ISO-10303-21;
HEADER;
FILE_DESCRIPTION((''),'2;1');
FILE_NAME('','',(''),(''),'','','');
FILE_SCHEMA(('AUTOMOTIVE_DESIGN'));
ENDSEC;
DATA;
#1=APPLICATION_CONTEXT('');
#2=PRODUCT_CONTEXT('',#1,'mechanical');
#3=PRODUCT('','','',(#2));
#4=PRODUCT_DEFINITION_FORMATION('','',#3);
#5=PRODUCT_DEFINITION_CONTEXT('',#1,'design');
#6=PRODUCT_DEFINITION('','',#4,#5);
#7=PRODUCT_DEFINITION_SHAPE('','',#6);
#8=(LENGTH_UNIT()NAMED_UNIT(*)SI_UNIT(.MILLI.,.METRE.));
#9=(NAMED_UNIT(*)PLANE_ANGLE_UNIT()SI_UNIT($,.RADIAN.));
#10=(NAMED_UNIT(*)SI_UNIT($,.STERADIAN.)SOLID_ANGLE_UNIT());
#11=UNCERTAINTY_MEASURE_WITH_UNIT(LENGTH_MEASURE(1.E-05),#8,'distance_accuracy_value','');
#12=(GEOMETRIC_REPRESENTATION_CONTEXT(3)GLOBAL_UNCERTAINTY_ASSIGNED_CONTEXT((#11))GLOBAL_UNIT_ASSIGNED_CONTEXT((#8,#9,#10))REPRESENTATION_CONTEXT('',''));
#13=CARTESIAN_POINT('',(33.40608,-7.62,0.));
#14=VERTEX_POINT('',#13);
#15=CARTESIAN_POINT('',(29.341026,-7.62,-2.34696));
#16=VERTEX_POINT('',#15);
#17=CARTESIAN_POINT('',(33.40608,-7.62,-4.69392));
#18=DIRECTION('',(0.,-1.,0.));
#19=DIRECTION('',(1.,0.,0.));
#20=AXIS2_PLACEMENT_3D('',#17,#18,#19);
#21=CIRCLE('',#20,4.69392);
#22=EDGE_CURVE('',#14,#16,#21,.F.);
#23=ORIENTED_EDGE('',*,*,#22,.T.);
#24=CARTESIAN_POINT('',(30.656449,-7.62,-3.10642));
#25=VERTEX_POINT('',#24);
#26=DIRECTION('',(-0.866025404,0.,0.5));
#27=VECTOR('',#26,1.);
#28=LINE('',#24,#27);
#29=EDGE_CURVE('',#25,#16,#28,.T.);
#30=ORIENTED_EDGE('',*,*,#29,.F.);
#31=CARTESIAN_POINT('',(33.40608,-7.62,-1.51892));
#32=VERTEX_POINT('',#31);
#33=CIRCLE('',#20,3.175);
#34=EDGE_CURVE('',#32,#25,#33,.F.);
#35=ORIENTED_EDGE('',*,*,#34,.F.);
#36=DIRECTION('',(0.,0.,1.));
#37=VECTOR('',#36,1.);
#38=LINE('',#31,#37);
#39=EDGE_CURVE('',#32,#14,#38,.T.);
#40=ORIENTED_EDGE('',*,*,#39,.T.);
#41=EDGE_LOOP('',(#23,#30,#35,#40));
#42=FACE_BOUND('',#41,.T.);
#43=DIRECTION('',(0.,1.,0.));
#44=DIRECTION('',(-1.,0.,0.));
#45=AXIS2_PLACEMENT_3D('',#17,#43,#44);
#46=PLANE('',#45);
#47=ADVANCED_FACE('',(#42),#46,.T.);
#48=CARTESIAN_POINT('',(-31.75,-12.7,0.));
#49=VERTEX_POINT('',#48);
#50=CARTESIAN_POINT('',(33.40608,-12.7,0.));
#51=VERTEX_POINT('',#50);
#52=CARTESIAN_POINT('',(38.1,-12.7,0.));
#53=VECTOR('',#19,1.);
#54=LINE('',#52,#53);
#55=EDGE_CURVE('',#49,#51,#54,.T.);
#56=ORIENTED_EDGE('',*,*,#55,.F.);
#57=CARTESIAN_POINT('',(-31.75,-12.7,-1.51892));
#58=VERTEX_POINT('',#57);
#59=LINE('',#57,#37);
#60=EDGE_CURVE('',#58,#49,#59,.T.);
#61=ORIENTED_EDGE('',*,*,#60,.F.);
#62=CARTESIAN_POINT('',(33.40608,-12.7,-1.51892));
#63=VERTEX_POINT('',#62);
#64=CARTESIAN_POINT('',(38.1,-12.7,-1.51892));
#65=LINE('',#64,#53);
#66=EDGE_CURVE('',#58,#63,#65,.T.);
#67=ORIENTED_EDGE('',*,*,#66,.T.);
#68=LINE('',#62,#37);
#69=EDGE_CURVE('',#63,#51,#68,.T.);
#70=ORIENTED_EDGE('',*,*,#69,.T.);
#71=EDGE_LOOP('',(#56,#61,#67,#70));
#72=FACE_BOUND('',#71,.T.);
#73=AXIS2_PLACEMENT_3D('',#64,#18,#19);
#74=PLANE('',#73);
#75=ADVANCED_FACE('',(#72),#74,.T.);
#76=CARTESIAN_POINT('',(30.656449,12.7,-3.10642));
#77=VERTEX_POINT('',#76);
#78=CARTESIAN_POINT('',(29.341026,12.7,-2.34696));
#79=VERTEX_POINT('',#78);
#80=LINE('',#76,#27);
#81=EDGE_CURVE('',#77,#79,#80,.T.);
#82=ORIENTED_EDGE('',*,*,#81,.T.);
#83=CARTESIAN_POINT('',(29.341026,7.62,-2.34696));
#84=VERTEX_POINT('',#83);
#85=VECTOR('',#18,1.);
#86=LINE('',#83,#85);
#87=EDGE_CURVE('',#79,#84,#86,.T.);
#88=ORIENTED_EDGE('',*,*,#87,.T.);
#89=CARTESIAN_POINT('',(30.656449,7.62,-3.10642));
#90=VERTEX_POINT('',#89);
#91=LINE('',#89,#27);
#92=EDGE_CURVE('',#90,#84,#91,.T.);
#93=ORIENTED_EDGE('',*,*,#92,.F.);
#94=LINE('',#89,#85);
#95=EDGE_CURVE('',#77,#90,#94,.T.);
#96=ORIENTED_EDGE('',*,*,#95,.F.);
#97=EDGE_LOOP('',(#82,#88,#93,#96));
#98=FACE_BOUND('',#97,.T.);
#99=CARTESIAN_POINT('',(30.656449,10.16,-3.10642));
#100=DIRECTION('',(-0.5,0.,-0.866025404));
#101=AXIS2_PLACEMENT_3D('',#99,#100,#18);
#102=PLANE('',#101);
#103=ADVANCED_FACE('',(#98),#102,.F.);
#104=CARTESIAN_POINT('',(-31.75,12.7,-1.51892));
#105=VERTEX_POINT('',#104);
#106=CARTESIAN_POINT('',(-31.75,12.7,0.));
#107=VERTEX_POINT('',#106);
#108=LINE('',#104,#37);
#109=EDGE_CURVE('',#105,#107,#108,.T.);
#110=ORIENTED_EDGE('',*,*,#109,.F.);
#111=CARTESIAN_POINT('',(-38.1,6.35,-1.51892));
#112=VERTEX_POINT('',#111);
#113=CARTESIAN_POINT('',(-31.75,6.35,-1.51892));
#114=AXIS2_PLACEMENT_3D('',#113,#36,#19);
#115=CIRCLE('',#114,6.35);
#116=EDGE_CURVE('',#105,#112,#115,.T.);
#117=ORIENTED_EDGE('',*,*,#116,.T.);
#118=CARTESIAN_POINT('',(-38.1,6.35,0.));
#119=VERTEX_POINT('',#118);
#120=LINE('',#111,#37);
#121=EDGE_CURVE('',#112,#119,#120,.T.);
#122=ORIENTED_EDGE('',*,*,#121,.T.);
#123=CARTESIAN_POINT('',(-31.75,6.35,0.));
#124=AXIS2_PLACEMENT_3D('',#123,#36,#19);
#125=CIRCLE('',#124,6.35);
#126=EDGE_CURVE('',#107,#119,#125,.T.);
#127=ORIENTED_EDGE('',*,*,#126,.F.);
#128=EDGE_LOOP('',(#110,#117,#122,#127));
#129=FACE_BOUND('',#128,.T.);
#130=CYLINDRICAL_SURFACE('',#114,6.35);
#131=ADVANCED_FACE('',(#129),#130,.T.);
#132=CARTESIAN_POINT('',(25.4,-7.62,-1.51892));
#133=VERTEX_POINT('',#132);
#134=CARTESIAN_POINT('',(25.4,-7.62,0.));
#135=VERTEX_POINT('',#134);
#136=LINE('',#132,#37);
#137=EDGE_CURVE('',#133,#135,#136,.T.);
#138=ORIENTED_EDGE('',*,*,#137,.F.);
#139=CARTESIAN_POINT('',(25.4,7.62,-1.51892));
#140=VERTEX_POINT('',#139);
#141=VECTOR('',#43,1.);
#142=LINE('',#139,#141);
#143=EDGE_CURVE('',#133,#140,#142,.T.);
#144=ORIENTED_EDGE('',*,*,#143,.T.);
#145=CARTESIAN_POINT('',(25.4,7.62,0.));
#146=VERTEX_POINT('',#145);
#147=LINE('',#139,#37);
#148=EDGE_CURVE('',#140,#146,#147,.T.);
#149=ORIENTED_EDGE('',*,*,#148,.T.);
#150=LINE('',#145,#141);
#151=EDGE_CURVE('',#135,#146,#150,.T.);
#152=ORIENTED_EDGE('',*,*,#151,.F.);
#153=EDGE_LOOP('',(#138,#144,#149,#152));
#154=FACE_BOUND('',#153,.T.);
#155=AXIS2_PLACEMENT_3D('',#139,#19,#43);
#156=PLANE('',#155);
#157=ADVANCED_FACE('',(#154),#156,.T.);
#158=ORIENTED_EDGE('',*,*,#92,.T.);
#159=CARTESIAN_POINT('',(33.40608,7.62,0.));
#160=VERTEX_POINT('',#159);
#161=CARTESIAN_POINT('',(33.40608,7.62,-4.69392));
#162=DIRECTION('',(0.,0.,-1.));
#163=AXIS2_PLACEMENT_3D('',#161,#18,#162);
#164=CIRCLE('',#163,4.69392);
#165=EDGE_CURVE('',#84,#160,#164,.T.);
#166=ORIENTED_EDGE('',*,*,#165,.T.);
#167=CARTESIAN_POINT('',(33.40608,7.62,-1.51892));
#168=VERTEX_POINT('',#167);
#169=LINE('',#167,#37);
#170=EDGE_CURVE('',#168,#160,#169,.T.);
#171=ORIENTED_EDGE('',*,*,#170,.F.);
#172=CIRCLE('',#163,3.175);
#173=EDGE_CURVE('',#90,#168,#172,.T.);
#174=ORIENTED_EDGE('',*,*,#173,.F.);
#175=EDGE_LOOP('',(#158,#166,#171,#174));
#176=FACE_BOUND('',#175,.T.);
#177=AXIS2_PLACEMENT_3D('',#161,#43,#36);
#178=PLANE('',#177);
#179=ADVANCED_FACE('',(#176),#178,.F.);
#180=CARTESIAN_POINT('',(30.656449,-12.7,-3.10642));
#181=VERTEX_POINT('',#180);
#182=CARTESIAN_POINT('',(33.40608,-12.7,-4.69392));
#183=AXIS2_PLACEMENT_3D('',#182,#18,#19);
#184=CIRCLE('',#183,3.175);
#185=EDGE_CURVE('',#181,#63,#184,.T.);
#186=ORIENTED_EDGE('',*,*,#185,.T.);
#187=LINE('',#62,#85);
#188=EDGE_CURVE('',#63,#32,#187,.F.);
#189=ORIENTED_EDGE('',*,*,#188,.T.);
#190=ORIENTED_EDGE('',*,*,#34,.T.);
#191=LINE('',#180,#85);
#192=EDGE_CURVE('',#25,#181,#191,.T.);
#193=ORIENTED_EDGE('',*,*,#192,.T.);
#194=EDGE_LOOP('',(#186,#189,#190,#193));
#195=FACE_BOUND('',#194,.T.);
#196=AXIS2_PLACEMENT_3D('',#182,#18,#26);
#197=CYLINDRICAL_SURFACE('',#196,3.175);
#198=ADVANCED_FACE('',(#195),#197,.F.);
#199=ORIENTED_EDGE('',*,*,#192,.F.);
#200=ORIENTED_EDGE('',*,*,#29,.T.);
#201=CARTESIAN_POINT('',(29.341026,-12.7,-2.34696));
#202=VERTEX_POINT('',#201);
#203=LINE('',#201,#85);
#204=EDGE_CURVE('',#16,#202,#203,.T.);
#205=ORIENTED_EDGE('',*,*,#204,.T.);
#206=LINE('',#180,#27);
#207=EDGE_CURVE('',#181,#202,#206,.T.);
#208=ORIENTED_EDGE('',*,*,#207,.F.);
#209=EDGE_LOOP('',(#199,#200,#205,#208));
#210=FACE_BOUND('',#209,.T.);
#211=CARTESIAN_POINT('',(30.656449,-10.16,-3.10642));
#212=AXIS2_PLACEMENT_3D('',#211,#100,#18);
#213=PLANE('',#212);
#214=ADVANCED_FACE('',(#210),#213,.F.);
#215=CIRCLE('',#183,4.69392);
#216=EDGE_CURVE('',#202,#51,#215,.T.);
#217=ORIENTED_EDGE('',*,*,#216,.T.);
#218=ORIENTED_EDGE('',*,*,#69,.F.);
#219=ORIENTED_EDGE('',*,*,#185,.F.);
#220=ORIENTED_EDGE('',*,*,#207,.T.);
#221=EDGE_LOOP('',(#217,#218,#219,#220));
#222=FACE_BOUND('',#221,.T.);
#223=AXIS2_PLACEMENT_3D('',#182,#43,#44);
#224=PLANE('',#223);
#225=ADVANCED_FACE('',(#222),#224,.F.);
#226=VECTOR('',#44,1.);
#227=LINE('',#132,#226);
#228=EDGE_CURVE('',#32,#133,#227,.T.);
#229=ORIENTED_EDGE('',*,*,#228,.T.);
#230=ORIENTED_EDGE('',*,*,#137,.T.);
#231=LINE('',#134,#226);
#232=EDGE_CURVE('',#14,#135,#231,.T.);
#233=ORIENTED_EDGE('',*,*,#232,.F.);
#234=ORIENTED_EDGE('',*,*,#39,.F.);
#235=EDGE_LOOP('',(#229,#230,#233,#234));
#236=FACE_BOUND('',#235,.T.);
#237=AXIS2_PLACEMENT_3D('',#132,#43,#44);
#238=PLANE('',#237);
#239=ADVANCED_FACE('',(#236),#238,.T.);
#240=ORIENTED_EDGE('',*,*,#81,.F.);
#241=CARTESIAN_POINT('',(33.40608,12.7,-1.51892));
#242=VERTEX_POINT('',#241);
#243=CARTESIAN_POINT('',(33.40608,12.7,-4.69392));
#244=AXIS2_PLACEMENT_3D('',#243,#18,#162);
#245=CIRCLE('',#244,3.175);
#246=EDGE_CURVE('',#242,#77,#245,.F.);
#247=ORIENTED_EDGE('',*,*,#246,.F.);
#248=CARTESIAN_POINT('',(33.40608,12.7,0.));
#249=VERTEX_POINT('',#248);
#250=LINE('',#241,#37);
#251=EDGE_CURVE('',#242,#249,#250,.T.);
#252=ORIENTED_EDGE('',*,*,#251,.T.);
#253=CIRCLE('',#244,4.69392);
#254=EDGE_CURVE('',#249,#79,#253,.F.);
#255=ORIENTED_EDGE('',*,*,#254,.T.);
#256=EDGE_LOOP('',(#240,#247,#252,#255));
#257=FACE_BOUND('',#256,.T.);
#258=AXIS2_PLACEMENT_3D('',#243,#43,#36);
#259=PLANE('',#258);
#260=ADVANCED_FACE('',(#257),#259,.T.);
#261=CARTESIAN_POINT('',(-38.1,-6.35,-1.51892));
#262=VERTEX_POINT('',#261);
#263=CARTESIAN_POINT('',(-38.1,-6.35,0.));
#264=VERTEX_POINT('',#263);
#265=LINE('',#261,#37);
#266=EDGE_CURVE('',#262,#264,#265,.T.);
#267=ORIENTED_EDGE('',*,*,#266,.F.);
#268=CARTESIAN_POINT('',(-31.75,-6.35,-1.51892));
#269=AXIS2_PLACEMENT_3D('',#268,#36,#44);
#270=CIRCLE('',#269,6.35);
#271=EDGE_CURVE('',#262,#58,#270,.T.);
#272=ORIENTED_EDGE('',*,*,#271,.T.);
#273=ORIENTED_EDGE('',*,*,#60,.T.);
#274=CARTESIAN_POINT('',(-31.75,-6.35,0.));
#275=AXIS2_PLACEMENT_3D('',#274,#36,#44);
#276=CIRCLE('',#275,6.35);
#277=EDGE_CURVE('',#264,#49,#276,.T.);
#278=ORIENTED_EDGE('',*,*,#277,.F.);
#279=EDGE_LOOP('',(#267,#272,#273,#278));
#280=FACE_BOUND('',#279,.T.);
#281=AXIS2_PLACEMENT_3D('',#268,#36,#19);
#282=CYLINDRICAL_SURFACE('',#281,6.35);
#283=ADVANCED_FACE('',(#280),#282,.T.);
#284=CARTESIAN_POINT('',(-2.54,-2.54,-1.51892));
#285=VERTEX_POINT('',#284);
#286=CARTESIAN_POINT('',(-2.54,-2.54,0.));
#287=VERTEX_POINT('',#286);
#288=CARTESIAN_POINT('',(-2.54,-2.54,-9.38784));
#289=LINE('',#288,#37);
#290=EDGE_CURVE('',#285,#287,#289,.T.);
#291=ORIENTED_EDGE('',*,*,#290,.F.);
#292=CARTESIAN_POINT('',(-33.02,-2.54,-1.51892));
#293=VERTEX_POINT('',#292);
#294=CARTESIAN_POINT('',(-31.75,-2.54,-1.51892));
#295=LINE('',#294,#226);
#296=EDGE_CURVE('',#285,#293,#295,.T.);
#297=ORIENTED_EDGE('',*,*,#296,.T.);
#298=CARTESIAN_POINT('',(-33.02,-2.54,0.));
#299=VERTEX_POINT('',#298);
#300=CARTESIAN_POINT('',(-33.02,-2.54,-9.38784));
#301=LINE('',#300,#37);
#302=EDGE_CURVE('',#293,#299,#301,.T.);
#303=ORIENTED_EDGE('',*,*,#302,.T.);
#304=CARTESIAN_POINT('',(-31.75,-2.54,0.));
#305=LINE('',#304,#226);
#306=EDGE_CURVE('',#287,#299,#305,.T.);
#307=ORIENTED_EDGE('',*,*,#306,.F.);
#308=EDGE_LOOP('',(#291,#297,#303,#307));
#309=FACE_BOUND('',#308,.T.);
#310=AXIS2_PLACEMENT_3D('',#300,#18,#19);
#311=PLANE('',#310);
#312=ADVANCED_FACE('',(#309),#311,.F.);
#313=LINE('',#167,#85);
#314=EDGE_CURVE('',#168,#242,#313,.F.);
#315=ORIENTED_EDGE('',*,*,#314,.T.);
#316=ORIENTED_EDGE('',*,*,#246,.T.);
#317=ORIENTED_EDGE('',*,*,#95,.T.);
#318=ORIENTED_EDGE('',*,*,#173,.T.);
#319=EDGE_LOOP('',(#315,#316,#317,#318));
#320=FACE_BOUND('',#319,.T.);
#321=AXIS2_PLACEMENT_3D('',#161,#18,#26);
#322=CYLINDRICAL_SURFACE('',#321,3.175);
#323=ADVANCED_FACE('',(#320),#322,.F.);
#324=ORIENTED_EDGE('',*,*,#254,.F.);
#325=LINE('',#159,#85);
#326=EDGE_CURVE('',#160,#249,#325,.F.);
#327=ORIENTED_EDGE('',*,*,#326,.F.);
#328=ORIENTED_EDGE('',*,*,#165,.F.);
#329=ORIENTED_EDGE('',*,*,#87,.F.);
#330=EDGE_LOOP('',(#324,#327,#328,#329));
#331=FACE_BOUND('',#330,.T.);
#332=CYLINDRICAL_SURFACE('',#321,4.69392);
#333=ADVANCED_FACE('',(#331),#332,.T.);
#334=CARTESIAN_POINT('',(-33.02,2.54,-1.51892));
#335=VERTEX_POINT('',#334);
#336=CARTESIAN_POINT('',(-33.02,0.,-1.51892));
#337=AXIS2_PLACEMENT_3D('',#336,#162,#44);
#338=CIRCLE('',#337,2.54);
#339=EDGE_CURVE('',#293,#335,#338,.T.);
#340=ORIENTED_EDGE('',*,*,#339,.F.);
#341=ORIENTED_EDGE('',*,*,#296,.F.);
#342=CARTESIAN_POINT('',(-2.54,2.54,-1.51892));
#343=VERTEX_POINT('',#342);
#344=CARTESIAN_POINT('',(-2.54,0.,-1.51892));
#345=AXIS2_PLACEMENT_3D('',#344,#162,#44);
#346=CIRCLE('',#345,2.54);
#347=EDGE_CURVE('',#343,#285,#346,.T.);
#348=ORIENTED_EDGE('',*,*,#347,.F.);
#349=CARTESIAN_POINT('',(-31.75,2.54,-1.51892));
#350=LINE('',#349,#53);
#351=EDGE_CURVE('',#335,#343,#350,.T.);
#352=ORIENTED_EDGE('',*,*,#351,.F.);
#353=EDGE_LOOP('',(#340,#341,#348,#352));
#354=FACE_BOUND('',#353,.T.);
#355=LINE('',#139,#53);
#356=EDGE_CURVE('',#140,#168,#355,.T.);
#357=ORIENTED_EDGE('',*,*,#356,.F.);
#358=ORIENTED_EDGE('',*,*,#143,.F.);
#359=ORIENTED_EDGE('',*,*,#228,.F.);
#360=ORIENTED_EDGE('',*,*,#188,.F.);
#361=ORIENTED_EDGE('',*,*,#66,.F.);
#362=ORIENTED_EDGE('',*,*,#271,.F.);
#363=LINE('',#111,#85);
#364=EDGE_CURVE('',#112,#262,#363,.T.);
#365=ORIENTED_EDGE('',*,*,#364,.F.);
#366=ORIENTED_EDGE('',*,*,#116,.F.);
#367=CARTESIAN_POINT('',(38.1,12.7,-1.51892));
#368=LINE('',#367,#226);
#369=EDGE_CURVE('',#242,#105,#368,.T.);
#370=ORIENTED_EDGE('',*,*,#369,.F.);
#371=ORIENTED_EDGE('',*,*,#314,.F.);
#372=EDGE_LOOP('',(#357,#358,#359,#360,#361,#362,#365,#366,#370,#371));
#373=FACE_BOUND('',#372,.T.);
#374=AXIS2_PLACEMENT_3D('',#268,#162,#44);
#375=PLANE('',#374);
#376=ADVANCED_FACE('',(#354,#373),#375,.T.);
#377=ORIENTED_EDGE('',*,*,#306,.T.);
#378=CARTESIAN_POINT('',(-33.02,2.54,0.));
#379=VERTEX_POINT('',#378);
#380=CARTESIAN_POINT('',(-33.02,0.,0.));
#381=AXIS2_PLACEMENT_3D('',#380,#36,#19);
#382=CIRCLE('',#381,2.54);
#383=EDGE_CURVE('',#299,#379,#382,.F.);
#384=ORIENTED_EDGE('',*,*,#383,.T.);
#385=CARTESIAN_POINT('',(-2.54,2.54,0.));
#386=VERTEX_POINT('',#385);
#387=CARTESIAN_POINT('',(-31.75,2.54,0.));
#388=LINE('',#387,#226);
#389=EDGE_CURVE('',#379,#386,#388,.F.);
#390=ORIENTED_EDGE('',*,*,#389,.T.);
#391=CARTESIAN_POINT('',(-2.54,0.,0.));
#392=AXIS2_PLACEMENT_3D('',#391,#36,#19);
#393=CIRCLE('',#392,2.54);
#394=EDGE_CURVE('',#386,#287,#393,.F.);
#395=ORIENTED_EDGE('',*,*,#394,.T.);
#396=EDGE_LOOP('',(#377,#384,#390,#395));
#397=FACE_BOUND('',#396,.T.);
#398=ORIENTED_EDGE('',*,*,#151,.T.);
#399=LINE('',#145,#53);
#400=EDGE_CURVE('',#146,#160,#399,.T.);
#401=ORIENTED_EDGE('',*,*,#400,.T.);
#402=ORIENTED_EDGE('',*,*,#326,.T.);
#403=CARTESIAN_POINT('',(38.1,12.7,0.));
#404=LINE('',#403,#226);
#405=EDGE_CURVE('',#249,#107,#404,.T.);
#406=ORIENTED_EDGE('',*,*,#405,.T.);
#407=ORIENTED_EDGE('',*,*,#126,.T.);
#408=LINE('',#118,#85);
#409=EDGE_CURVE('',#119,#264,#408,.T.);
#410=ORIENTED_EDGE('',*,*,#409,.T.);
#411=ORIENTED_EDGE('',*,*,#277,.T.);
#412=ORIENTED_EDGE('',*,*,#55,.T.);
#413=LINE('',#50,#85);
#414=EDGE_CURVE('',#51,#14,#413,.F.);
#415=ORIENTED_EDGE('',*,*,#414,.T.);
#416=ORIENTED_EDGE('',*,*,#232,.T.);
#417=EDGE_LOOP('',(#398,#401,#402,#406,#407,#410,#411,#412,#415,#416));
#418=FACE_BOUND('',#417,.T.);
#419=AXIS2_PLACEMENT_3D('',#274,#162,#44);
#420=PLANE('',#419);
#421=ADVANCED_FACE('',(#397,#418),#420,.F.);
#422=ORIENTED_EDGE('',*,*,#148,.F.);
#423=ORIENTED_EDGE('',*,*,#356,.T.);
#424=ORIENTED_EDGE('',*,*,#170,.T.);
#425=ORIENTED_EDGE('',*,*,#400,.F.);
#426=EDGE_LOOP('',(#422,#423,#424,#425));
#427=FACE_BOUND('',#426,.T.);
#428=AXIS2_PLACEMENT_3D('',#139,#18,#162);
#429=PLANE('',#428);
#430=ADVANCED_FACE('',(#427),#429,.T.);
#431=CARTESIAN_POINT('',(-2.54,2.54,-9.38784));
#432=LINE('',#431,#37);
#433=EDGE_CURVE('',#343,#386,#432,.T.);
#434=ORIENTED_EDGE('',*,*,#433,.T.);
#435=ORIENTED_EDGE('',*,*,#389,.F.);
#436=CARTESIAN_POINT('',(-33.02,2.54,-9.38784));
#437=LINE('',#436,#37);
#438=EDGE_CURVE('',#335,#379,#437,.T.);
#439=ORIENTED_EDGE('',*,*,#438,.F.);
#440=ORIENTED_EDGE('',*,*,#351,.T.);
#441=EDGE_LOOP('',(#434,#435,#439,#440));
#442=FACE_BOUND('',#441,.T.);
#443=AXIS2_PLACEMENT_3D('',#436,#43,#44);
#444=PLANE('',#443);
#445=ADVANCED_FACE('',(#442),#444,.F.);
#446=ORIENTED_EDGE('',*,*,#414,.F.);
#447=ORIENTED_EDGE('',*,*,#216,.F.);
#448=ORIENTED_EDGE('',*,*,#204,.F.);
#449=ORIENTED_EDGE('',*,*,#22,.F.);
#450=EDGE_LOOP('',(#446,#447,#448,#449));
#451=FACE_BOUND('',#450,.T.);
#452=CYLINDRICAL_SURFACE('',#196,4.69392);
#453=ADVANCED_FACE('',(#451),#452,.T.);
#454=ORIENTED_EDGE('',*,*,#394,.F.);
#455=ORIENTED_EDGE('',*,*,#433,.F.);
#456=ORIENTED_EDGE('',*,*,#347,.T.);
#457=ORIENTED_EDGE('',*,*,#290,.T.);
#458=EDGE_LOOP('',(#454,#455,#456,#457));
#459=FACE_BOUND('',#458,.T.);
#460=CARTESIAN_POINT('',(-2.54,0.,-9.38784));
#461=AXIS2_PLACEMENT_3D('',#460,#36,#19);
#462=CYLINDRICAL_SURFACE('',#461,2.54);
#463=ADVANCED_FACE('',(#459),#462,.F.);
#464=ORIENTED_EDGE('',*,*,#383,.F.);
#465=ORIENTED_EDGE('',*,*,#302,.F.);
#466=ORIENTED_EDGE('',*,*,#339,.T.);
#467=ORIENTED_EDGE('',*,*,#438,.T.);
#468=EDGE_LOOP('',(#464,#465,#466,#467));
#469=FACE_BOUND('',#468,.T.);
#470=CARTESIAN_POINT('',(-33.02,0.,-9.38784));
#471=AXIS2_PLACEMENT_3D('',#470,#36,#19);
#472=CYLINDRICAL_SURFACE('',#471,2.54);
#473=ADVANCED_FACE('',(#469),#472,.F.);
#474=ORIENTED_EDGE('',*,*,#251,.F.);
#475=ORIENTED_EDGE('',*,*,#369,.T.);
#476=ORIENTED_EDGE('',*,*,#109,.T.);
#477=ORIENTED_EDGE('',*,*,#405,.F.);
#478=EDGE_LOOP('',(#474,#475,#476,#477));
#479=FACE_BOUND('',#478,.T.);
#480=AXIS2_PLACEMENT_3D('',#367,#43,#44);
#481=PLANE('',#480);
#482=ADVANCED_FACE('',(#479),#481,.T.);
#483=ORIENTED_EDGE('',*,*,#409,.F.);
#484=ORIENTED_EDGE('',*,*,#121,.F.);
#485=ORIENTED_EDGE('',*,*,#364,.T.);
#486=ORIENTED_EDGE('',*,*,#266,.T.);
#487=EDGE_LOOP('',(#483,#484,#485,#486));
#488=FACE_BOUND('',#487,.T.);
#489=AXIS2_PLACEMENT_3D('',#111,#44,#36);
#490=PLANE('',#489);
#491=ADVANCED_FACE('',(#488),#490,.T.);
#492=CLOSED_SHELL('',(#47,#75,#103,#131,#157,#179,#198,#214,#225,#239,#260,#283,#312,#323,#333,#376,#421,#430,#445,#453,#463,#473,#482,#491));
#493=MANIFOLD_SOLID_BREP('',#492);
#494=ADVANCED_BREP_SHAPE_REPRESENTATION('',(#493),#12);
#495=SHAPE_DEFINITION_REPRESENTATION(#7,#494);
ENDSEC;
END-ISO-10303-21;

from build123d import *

# Parameters (mm, degrees)
BASE_FLANGE1_DEPTH      = 1.51892
HEM1_START              = -12.7
HEM1_DEPTH              = 25.4
HEM1_2_DEPTH            = 5.08
HEM1_START_2            = 7.62
HEM1_3_DEPTH            = 5.08
CUT_EXTRUDE1_DEPTH      = 42.243563617
CUT_EXTRUDE1_DEPTH_BACK = 42.243563617


# Read off the part's stored shape, not the designer's step: Hem1
# Sheet-metal steps are written as plain solids
with BuildPart() as part:
    # Sketch1 → Base-Flange1 (new body)
    with BuildSketch(Plane.XY):
        with BuildLine():
            Line((38.1, -7.62), (38.1, -12.7))
            Line((38.1, -12.7), (-31.75, -12.7))
            ThreePointArc((-31.75, -12.7), (-36.240128061, -10.840128061), (-38.1, -6.35))
            Line((-38.1, -6.35), (-38.1, 6.35))
            ThreePointArc((-38.1, 6.35), (-36.240128061, 10.840128061), (-31.75, 12.7))
            Line((-31.75, 12.7), (38.1, 12.7))
            Line((38.1, 12.7), (38.1, 7.62))
            Line((38.1, 7.62), (25.4, 7.62))
            Line((25.4, 7.62), (25.4, -7.62))
            Line((25.4, -7.62), (38.1, -7.62))
        make_face()
    extrude(amount=-BASE_FLANGE1_DEPTH)

    # Hem1 outline → Hem1 (cut)
    with BuildSketch(Plane(origin=(0, 0, 0), x_dir=(1, 0, 0), z_dir=(0, 1, 0)).offset(HEM1_START)):
        with BuildLine():
            Line((38.1, 1.51892), (36.863284068, 1.51892))
            ThreePointArc((36.863284068, 1.51892), (35.294159576, 0.396474191), (33.40608, 0))
            Line((33.40608, 0), (38.1, 0))
            Line((38.1, 0), (38.1, 1.51892))
        make_face()
    extrude(amount=HEM1_DEPTH, mode=Mode.SUBTRACT)

    # Hem1 2 outline → Hem1 2 (add)
    with BuildSketch(Plane(origin=(0, 0, 0), x_dir=(1, 0, 0), z_dir=(0, 1, 0)).offset(HEM1_START)):
        with BuildLine():
            Line((29.341026037, 2.34696), (30.656449343, 3.10642))
            ThreePointArc((30.656449343, 3.10642), (34.99358, 7.443550657), (33.40608, 1.51892))
            Line((33.40608, 1.51892), (36.863284068, 1.51892))
            ThreePointArc((36.863284068, 1.51892), (33.919678028, 9.359657029), (29.341026037, 2.34696))
        make_face()
    extrude(amount=HEM1_2_DEPTH)

    # Hem1 3 outline → Hem1 3 (add)
    with BuildSketch(Plane(origin=(0, 0, 0), x_dir=(1, 0, 0), z_dir=(0, 1, 0)).offset(HEM1_START_2)):
        with BuildLine():
            Line((29.341026037, 2.34696), (30.656449343, 3.10642))
            ThreePointArc((30.656449343, 3.10642), (34.99358, 7.443550657), (33.40608, 1.51892))
            Line((33.40608, 1.51892), (36.863284068, 1.51892))
            ThreePointArc((36.863284068, 1.51892), (33.919678028, 9.359657029), (29.341026037, 2.34696))
        make_face()
    extrude(amount=HEM1_3_DEPTH)

    # Sketch8 → Cut-Extrude1 (cut, two sides: drawn at the far end of the back side and taken through both)
    with BuildSketch(Plane.XY.offset(-CUT_EXTRUDE1_DEPTH_BACK)):
        with BuildLine():
            Line((-33.02, 2.54), (-2.54, 2.54))
            ThreePointArc((-2.54, 2.54), (0, 0), (-2.54, -2.54))
            Line((-2.54, -2.54), (-33.02, -2.54))
            ThreePointArc((-33.02, -2.54), (-35.56, 0), (-33.02, 2.54))
        make_face()
    extrude(amount=CUT_EXTRUDE1_DEPTH + CUT_EXTRUDE1_DEPTH_BACK, mode=Mode.SUBTRACT)


solid = part.part
